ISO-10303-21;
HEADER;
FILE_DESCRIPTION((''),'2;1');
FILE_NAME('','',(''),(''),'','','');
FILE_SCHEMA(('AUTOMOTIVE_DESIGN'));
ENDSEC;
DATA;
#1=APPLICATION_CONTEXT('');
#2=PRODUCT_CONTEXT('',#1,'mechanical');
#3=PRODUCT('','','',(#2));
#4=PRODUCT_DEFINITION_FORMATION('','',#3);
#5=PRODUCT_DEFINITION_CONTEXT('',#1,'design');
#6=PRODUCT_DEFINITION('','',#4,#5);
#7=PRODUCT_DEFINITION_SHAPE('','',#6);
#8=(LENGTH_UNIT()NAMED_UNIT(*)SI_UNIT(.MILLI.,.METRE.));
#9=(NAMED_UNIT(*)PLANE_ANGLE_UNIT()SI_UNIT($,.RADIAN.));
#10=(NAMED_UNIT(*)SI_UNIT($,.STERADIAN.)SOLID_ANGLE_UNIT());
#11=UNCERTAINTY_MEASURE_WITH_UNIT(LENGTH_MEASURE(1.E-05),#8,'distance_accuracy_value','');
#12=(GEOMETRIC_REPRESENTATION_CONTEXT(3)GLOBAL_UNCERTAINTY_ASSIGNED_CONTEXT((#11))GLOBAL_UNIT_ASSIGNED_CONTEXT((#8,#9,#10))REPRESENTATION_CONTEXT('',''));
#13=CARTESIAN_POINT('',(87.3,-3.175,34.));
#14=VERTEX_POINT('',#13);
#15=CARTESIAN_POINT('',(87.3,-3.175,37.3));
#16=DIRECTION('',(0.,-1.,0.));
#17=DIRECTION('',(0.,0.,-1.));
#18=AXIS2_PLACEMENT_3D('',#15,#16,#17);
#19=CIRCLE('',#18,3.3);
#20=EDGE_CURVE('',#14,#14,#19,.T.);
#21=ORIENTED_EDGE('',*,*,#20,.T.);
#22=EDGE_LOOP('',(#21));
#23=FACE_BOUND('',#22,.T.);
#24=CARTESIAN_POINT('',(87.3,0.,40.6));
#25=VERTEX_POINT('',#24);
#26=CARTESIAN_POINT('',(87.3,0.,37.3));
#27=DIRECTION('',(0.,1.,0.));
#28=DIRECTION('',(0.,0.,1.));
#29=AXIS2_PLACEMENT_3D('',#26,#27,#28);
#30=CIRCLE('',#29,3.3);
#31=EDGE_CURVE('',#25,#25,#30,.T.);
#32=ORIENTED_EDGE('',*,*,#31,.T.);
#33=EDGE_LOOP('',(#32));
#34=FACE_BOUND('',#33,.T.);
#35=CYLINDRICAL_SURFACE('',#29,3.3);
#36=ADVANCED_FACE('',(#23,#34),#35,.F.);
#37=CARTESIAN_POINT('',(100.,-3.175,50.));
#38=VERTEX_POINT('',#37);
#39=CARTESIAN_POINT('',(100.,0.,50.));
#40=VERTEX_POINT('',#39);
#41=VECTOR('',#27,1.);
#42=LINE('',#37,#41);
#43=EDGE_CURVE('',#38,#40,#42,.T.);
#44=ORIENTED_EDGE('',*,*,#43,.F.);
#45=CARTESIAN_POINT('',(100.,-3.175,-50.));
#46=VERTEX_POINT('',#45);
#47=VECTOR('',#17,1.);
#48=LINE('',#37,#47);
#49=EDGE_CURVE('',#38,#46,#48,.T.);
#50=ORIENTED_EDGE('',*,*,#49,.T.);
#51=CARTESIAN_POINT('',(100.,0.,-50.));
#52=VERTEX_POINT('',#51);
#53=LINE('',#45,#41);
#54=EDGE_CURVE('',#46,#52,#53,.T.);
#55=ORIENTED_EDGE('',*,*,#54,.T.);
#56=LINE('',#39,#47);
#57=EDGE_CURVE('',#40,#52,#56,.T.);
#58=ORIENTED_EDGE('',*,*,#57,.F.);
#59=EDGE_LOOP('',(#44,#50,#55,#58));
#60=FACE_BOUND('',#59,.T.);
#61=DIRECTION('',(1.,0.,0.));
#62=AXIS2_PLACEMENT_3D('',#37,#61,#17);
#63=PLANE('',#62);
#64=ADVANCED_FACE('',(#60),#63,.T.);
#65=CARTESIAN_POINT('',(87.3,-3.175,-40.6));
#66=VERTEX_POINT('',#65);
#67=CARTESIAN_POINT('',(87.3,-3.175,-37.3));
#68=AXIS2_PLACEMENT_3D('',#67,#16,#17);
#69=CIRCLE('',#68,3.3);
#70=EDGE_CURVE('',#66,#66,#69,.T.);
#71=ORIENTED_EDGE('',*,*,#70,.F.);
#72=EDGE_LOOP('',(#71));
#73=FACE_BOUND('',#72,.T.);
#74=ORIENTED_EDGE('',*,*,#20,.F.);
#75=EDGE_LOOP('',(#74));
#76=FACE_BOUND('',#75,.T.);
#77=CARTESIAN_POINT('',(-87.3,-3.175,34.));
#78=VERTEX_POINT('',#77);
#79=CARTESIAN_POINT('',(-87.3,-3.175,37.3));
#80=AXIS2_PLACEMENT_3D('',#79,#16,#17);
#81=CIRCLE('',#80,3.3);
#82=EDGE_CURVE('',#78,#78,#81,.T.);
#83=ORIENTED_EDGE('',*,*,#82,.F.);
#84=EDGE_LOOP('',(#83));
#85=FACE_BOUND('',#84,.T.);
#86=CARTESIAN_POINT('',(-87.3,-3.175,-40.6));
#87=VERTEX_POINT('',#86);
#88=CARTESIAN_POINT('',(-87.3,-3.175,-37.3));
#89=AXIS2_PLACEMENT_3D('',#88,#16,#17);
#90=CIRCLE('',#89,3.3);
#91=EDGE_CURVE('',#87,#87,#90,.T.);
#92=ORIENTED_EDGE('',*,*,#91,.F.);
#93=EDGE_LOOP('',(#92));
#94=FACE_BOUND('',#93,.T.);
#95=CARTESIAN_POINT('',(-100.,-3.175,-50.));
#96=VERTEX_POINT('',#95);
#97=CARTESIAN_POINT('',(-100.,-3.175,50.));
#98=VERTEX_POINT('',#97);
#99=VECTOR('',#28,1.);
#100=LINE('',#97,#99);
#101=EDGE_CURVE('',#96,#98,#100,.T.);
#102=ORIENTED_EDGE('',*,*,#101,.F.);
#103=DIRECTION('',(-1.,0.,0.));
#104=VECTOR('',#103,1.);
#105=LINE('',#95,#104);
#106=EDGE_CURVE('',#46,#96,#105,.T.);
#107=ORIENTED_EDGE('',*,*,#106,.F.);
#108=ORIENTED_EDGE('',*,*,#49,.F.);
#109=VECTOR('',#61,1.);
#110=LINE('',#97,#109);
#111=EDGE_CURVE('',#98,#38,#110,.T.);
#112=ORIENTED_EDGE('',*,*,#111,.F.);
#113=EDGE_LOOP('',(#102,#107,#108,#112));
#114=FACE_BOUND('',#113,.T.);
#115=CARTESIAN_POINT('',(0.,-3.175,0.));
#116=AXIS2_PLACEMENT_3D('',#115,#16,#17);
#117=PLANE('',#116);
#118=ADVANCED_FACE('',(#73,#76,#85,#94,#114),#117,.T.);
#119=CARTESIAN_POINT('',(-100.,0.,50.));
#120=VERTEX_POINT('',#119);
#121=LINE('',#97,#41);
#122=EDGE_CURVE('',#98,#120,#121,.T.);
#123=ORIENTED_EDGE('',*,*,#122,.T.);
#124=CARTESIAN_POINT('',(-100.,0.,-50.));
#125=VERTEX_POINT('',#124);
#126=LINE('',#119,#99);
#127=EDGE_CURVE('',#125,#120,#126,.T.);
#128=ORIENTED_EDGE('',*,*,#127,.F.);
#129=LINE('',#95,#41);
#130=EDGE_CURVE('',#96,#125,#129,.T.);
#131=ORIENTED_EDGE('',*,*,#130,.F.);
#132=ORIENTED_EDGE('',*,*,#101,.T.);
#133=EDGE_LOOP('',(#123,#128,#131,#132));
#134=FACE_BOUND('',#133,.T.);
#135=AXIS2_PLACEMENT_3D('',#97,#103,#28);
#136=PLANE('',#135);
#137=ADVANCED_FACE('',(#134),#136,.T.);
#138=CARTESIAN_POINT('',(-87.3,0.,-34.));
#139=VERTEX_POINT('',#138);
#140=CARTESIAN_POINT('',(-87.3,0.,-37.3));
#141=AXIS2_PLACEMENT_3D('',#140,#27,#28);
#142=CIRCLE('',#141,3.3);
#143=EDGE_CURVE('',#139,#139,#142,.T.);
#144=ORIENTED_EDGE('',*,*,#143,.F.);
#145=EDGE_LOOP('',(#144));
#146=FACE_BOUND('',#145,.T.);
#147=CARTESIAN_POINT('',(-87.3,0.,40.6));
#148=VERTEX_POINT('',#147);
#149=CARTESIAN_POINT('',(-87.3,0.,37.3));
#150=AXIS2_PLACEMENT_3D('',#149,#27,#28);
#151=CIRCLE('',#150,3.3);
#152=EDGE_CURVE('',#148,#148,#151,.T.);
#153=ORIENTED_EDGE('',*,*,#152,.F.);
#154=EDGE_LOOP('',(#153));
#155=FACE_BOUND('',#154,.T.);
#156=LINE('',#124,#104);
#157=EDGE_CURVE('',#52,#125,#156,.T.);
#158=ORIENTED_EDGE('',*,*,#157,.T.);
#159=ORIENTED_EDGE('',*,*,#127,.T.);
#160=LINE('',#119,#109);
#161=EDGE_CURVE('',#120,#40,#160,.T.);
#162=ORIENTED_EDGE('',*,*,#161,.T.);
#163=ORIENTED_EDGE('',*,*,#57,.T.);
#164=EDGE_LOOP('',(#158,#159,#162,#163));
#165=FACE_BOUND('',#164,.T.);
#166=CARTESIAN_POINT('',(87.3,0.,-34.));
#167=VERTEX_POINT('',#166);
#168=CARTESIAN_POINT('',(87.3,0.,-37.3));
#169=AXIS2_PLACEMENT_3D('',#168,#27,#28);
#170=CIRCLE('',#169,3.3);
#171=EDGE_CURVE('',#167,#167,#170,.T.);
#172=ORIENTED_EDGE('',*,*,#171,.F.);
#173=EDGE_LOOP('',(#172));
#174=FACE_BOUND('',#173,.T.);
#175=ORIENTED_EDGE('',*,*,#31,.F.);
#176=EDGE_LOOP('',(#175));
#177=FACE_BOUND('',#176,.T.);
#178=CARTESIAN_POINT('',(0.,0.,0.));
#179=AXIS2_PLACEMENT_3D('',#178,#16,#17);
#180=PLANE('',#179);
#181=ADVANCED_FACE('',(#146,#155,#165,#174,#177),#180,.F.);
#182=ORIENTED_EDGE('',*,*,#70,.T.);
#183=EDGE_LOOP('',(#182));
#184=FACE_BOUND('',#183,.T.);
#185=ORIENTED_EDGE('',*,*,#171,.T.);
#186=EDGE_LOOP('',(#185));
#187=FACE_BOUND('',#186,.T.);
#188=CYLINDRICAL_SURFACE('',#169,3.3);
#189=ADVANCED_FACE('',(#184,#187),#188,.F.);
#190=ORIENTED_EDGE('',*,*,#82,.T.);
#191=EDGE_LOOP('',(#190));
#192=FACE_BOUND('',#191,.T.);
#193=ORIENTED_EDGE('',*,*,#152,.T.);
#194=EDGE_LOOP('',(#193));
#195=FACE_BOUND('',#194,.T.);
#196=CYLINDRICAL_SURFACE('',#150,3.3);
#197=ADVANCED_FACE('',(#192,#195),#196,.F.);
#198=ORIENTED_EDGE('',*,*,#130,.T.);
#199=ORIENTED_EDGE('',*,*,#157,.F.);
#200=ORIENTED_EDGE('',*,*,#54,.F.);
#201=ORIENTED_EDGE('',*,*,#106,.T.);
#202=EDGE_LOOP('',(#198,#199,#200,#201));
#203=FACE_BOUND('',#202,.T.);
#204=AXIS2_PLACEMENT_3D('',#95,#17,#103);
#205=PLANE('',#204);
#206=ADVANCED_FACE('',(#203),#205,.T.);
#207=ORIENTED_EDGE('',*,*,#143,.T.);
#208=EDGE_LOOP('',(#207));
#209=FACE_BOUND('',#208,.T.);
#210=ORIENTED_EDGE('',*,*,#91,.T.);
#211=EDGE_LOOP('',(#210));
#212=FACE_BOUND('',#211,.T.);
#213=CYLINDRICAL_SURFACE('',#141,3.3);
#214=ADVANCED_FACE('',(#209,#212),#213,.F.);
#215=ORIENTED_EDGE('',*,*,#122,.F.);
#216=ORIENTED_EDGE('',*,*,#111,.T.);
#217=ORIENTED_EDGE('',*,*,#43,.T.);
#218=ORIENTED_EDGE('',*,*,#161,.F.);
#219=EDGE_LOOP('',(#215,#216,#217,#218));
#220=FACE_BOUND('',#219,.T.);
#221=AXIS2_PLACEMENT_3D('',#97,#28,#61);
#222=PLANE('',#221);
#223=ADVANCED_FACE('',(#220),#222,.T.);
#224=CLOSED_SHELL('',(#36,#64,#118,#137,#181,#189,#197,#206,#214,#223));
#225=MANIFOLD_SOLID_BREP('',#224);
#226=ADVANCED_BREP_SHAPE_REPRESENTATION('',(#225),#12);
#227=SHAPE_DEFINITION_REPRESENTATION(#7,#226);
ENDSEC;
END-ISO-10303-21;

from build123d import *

# Parameters (mm, degrees)
SKETCH2_W                = 200
SKETCH2_H                = 100
BASE_FLANGE1_DEPTH       = 3.175
M6_CLEARANCE_HOLE1_D     = 6.6
M6_CLEARANCE_HOLE1_DEPTH = 18.75
M6_CLEARANCE_HOLE1_TIP   = 1.982840043


# Sheet-metal steps are written as plain solids
with BuildPart() as part:
    # Sketch2 (on Top Plane) → Base-Flange1 (new body)
    with BuildSketch(Plane(origin=(0, 0, 0), x_dir=(1, 0, 0), z_dir=(0, 1, 0))):
        Rectangle(SKETCH2_W, SKETCH2_H)
    extrude(amount=-BASE_FLANGE1_DEPTH)

    # M6 Clearance Hole1
    with Locations(Plane(origin=(0, 0, 0), x_dir=(1, 0, 0), z_dir=(0, 1, 0))):
        with Locations((-87.3, -37.3), (-87.3, 37.3), (87.3, 37.3), (87.3, -37.3)):
            Hole(M6_CLEARANCE_HOLE1_D / 2, depth=M6_CLEARANCE_HOLE1_DEPTH)
            with Locations((0, 0, -(M6_CLEARANCE_HOLE1_DEPTH + M6_CLEARANCE_HOLE1_TIP / 2))):  # 118° drill point
                Cone(0, M6_CLEARANCE_HOLE1_D / 2, M6_CLEARANCE_HOLE1_TIP, mode=Mode.SUBTRACT)


solid = part.part
